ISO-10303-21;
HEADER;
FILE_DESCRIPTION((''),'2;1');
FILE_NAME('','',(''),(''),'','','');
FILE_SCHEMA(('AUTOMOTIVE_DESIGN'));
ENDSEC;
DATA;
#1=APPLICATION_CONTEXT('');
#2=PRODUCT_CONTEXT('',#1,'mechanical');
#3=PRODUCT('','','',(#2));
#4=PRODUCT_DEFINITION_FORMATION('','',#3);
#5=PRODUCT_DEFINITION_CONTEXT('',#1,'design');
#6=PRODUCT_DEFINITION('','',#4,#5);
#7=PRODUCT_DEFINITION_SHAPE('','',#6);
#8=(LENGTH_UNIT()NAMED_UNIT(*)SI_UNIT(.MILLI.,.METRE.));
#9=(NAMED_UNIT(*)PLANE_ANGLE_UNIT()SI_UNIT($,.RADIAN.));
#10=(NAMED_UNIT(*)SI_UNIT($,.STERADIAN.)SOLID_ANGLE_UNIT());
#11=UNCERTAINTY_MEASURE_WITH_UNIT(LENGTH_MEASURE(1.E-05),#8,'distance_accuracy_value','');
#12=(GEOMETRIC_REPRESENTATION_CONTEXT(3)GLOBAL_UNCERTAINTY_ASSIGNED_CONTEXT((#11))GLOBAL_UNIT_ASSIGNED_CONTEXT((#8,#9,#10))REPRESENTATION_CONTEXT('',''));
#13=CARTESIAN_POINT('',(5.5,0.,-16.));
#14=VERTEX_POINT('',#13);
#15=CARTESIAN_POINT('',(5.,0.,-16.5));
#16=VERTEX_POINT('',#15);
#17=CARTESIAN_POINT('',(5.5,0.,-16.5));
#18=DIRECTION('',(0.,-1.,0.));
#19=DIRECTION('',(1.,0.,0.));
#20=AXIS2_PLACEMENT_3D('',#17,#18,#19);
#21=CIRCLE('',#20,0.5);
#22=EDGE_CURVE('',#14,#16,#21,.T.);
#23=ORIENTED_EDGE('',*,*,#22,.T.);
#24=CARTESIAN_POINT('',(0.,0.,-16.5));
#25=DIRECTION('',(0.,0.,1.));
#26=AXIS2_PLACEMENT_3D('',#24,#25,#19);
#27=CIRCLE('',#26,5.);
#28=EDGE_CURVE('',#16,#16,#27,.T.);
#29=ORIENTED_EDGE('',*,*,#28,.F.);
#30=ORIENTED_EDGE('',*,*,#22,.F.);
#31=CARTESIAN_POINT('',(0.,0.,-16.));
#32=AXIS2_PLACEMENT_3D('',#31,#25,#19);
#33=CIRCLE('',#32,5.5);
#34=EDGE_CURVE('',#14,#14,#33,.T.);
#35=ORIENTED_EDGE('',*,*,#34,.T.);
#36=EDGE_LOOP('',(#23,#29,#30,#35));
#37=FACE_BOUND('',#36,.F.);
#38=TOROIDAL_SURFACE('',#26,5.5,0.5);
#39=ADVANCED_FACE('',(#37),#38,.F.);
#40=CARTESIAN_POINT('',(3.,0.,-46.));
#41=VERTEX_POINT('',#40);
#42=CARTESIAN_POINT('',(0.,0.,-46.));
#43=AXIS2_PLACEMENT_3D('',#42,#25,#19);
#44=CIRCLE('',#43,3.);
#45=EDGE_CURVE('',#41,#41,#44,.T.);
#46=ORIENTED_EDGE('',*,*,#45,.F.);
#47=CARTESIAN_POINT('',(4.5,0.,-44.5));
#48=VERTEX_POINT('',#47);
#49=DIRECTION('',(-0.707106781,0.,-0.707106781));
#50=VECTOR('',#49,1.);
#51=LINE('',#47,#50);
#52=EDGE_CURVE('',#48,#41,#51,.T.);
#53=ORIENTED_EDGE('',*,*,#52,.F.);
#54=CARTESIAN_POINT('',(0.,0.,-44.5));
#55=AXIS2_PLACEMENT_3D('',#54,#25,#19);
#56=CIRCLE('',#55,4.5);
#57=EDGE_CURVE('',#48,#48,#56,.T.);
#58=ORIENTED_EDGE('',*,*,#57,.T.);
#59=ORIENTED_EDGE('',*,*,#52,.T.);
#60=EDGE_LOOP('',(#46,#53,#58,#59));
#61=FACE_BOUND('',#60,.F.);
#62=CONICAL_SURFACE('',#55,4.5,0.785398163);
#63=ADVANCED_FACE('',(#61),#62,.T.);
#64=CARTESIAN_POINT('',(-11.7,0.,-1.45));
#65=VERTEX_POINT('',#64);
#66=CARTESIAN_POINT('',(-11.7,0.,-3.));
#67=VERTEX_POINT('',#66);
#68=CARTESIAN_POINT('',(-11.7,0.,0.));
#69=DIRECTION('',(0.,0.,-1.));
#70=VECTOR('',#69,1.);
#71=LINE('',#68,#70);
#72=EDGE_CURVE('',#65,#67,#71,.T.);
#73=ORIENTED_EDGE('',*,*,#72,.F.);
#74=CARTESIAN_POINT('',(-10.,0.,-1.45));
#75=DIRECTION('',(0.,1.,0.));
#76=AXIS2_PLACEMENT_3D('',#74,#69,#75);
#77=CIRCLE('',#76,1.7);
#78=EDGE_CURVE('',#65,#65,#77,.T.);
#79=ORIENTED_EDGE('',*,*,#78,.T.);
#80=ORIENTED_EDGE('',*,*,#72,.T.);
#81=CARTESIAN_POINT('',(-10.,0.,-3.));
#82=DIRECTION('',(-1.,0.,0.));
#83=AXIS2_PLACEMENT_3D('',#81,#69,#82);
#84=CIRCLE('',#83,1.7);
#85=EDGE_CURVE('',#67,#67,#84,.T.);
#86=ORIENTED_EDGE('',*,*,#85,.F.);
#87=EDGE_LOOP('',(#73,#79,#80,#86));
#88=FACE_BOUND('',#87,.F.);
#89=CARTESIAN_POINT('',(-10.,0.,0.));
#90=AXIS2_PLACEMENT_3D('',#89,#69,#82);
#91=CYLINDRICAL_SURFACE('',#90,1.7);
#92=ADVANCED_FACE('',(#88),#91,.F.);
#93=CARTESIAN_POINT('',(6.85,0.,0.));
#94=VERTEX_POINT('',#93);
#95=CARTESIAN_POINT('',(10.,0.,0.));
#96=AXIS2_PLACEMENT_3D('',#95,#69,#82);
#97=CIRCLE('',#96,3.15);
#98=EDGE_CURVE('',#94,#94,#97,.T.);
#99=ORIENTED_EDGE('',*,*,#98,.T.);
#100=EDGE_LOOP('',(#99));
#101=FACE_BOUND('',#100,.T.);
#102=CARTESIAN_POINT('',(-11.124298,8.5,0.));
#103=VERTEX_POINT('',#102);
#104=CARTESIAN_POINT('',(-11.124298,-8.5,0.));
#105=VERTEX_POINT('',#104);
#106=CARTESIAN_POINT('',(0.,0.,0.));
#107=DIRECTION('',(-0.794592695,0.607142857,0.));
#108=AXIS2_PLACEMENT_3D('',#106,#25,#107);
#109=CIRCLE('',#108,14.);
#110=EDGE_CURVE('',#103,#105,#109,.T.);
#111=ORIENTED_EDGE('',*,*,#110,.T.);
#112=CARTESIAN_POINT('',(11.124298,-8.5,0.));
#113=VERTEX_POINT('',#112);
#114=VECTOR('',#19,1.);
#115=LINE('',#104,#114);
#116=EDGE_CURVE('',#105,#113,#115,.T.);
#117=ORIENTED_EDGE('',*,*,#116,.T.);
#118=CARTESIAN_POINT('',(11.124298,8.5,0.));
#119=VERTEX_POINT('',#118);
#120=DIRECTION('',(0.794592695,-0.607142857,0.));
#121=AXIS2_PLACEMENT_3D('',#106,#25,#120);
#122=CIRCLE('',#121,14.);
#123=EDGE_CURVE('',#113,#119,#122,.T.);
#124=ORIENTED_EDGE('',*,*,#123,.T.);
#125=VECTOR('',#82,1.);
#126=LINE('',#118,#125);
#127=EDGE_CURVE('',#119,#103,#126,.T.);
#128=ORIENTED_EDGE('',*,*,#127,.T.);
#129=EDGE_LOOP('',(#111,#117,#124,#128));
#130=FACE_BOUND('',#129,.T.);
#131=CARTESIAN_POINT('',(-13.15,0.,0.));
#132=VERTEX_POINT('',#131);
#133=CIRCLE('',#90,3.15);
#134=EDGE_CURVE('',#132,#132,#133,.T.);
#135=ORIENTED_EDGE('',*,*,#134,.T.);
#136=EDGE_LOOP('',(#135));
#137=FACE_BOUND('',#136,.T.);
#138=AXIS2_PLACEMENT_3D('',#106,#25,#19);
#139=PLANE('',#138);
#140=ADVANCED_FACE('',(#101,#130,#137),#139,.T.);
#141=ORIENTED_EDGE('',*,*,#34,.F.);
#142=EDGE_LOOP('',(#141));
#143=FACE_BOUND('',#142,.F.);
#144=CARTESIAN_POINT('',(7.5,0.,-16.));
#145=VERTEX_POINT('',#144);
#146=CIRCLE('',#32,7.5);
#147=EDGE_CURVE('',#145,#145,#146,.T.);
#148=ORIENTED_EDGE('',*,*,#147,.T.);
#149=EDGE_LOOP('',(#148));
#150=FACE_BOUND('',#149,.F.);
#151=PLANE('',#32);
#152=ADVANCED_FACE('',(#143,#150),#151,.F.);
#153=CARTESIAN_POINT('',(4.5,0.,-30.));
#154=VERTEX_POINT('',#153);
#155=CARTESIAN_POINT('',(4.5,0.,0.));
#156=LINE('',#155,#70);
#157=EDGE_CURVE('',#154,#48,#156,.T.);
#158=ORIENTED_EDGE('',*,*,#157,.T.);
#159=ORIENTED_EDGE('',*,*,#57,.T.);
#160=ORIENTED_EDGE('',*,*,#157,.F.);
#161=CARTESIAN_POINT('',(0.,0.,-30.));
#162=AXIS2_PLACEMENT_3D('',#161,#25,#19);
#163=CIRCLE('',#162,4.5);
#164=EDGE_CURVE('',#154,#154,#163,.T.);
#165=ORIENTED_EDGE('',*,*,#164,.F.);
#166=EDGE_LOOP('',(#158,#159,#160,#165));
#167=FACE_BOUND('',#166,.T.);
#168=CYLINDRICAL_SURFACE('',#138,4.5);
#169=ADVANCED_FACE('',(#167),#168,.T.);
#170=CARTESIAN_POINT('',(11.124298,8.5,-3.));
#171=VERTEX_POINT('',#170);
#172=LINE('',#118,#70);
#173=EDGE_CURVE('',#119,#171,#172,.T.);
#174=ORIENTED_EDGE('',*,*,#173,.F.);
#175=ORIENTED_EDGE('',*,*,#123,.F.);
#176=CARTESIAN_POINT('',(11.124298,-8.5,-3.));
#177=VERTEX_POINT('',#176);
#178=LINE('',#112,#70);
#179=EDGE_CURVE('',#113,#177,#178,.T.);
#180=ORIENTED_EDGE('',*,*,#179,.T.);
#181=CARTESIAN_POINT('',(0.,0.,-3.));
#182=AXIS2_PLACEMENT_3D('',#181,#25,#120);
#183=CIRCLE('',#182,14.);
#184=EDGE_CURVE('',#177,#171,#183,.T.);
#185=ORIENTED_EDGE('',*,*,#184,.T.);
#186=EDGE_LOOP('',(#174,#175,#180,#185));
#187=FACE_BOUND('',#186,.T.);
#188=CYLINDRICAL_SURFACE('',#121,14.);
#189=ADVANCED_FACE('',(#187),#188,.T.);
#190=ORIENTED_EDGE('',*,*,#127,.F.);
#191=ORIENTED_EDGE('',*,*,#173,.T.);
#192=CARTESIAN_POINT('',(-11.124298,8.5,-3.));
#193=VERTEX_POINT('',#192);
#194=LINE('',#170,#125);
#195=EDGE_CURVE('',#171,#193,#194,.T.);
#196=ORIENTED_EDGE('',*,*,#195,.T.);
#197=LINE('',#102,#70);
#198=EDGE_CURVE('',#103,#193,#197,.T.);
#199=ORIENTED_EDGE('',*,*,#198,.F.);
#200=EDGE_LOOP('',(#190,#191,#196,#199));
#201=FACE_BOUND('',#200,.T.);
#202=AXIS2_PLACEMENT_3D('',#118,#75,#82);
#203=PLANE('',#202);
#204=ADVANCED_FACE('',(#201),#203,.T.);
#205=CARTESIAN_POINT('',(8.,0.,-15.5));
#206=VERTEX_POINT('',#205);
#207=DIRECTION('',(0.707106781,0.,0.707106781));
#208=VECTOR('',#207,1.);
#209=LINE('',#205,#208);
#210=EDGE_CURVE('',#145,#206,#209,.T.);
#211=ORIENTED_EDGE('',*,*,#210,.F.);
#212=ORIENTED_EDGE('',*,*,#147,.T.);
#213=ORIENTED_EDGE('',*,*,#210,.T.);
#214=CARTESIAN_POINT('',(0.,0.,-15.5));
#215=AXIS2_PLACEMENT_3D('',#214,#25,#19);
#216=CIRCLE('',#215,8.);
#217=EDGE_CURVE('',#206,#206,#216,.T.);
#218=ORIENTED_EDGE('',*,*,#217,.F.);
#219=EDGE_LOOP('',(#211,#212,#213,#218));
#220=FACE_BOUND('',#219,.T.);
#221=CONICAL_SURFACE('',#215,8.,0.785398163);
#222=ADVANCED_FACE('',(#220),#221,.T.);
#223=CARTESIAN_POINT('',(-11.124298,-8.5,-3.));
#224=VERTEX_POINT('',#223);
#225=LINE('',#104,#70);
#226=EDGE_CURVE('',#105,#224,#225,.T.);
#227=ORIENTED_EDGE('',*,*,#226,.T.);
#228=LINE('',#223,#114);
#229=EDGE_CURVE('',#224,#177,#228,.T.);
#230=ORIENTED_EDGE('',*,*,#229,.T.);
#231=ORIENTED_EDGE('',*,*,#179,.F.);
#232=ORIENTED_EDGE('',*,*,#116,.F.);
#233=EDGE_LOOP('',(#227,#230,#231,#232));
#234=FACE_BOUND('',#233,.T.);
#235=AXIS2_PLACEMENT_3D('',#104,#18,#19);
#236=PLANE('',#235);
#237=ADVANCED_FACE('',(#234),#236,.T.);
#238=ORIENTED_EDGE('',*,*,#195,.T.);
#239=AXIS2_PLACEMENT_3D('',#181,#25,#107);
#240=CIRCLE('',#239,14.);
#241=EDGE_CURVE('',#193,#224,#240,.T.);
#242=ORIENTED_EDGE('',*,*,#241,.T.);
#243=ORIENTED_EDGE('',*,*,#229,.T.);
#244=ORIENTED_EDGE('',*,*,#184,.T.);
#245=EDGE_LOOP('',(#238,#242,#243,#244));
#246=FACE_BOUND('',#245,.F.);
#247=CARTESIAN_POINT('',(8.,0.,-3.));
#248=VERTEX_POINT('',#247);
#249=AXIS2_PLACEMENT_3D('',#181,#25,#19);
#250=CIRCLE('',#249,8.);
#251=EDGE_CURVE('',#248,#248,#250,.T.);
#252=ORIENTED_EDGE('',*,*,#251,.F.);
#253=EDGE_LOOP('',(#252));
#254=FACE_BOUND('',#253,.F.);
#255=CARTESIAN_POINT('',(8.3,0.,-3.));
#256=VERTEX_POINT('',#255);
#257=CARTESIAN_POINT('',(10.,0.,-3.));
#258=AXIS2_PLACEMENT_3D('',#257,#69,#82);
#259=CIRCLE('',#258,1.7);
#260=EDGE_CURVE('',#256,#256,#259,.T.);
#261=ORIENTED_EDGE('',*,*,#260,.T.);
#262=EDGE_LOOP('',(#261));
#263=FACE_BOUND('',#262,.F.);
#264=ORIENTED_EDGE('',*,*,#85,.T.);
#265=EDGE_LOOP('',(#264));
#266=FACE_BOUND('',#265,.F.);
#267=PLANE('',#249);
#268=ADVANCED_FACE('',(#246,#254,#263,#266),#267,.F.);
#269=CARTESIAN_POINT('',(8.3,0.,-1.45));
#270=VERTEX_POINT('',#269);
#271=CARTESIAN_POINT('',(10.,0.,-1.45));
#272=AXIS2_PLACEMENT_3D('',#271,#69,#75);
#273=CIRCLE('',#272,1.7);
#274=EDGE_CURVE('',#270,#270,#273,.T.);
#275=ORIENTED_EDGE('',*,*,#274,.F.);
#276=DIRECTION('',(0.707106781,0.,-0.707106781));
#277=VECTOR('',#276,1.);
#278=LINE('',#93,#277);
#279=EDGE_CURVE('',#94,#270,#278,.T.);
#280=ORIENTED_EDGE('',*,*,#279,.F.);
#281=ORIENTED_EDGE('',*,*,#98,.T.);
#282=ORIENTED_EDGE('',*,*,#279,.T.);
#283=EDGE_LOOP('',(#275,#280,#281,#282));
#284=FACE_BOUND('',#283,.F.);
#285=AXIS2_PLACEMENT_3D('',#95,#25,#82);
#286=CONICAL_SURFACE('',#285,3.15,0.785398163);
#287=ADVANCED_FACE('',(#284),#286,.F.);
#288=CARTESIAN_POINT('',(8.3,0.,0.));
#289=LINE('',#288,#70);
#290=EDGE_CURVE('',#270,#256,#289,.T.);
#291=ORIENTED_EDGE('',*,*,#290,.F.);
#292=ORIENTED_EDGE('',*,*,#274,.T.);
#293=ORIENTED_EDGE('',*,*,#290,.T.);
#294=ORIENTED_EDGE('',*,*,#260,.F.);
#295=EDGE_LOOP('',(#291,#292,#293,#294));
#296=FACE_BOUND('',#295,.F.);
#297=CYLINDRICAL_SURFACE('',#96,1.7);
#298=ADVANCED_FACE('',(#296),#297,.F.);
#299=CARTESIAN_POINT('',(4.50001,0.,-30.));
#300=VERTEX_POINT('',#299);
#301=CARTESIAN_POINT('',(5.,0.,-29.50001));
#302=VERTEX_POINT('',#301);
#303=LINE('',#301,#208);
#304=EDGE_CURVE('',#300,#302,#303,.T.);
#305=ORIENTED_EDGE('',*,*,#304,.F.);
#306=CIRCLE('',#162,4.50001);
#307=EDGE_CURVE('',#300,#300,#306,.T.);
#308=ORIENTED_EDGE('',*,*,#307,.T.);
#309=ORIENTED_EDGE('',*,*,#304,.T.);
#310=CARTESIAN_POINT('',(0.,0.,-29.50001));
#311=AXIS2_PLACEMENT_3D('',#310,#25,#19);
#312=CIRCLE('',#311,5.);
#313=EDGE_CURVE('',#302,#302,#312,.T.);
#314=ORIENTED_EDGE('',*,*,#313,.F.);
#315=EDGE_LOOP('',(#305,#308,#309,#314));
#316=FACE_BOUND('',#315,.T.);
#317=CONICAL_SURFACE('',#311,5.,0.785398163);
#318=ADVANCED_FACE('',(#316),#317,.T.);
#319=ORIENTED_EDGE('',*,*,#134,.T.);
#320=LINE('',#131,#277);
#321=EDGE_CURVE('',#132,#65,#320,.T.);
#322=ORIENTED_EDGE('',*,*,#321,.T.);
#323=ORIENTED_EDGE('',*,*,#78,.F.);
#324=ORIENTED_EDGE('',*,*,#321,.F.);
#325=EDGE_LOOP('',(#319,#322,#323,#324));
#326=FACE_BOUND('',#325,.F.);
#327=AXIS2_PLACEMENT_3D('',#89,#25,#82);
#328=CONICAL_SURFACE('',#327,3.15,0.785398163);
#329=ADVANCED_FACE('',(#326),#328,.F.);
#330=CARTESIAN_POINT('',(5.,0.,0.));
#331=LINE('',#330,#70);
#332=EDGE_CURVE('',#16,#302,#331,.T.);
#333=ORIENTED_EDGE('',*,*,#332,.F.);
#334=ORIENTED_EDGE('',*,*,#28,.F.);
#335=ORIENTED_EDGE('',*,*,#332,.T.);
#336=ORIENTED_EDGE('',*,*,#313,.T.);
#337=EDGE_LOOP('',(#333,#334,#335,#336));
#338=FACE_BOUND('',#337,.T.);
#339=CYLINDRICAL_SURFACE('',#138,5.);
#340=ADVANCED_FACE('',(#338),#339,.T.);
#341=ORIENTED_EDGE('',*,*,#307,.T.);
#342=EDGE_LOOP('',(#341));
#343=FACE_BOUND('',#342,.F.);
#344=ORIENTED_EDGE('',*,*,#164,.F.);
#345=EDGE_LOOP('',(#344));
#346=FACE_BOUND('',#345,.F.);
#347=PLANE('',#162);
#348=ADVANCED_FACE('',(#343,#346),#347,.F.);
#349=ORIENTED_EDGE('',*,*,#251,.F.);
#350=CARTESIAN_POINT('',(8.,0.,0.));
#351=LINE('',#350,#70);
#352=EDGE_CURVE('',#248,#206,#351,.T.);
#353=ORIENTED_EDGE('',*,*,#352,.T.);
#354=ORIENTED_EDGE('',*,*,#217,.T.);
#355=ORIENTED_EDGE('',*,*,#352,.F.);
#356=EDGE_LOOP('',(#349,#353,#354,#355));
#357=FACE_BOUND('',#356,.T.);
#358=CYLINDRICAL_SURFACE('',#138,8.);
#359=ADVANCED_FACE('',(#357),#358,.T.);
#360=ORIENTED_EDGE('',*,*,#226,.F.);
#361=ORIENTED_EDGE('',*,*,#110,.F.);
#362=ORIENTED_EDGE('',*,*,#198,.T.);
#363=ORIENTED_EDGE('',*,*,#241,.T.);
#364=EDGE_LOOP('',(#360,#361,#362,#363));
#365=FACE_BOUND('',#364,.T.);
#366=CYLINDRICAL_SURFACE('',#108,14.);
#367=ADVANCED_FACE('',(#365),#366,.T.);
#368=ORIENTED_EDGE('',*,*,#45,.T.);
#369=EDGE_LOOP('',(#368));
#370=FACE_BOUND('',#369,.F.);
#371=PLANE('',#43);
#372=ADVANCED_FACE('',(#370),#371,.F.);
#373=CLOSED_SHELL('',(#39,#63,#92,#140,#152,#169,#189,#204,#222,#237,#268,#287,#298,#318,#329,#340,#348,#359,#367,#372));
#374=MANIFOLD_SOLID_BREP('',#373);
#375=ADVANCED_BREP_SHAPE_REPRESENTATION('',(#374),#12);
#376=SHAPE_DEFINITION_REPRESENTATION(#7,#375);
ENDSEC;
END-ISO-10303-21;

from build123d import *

# Parameters (mm, degrees)
F2_R            = 4.5
F3_DEPTH        = 46
F1_R            = 5
F4_DEPTH        = 30
F0_R            = 8
F5_DEPTH        = 16
F6_SIZE2        = 1.5
F6_SIZE         = 1.5
F7_SIZE2        = 0.49999
F7_SIZE         = 0.49999
F8_SIZE2        = 0.5
F8_SIZE         = 0.5
F10_DEPTH       = 3
F12_D           = 3.4
F12_CSINK_D     = 6.3
F12_CSINK_ANGLE = 90
F13_D           = 3.4
F13_CSINK_D     = 6.3
F13_CSINK_ANGLE = 90
F15_R           = 0.5


# Not quite as in the source:
# - a fillet or chamfer is up to 0.001 mm smaller than in the source, because OpenCascade refuses the exact size
# - a feature of the source that left no trace in its solid (it failed there, or was rolled back) is left out


with BuildPart() as f3:
    # F2 (on Top) → F3 (new body)
    with BuildSketch(Plane.XY):
        Circle(F2_R)
    extrude(amount=-F3_DEPTH)

    # F1 (on Top) → F4 (join)
    with BuildSketch(Plane.XY):
        Circle(F1_R)
    extrude(amount=-F4_DEPTH)

    # F0 (on Top) → F5 (join)
    with BuildSketch(Plane.XY):
        Circle(F0_R)
    extrude(amount=-F5_DEPTH)

    # F6
    f6_edges = [f3.edges().sort_by_distance(p)[0] for p in [
        (-4.5, 0, -46),
    ]]
    chamfer(f6_edges, length=F6_SIZE, length2=F6_SIZE2)

    # F7 (size 0.5 and 0.5 in the source; OpenCascade refuses exactly that, so slightly less here)
    f7_edges = [f3.edges().sort_by_distance(p)[0] for p in [
        (-5, 0, -30),
    ]]
    chamfer(f7_edges, length=F7_SIZE, length2=F7_SIZE2)

    # F8
    f8_edges = [f3.edges().sort_by_distance(p)[0] for p in [
        (-8, 0, -16),
    ]]
    chamfer(f8_edges, length=F8_SIZE, length2=F8_SIZE2)

    # F9 (on Top) → F10 (join)
    with BuildSketch(Plane.XY):
        with BuildLine():
            Line((11.1242977306, 8.5), (-11.1242977306, 8.5))
            ThreePointArc((-11.1242977306, 8.5), (-14, 0), (-11.1242977306, -8.5))
            Line((-11.1242977306, -8.5), (11.1242977306, -8.5))
            ThreePointArc((11.1242977306, -8.5), (14, 0), (11.1242977306, 8.5))
        make_face()
    extrude(amount=-F10_DEPTH)

    # F12 (through all)
    with Locations(Plane.XY):
        with Locations((-10, 0)):
            CounterSinkHole(F12_D / 2, F12_CSINK_D / 2, counter_sink_angle=F12_CSINK_ANGLE)

    # F13 (through all)
    with Locations(Plane.XY):
        with Locations((10, 0)):
            CounterSinkHole(F13_D / 2, F13_CSINK_D / 2, counter_sink_angle=F13_CSINK_ANGLE)

    # F15
    f15_edges = [f3.edges().sort_by_distance(p)[0] for p in [
        (-5, 0, -16),
    ]]
    fillet(f15_edges, radius=F15_R)


solid = f3.part
